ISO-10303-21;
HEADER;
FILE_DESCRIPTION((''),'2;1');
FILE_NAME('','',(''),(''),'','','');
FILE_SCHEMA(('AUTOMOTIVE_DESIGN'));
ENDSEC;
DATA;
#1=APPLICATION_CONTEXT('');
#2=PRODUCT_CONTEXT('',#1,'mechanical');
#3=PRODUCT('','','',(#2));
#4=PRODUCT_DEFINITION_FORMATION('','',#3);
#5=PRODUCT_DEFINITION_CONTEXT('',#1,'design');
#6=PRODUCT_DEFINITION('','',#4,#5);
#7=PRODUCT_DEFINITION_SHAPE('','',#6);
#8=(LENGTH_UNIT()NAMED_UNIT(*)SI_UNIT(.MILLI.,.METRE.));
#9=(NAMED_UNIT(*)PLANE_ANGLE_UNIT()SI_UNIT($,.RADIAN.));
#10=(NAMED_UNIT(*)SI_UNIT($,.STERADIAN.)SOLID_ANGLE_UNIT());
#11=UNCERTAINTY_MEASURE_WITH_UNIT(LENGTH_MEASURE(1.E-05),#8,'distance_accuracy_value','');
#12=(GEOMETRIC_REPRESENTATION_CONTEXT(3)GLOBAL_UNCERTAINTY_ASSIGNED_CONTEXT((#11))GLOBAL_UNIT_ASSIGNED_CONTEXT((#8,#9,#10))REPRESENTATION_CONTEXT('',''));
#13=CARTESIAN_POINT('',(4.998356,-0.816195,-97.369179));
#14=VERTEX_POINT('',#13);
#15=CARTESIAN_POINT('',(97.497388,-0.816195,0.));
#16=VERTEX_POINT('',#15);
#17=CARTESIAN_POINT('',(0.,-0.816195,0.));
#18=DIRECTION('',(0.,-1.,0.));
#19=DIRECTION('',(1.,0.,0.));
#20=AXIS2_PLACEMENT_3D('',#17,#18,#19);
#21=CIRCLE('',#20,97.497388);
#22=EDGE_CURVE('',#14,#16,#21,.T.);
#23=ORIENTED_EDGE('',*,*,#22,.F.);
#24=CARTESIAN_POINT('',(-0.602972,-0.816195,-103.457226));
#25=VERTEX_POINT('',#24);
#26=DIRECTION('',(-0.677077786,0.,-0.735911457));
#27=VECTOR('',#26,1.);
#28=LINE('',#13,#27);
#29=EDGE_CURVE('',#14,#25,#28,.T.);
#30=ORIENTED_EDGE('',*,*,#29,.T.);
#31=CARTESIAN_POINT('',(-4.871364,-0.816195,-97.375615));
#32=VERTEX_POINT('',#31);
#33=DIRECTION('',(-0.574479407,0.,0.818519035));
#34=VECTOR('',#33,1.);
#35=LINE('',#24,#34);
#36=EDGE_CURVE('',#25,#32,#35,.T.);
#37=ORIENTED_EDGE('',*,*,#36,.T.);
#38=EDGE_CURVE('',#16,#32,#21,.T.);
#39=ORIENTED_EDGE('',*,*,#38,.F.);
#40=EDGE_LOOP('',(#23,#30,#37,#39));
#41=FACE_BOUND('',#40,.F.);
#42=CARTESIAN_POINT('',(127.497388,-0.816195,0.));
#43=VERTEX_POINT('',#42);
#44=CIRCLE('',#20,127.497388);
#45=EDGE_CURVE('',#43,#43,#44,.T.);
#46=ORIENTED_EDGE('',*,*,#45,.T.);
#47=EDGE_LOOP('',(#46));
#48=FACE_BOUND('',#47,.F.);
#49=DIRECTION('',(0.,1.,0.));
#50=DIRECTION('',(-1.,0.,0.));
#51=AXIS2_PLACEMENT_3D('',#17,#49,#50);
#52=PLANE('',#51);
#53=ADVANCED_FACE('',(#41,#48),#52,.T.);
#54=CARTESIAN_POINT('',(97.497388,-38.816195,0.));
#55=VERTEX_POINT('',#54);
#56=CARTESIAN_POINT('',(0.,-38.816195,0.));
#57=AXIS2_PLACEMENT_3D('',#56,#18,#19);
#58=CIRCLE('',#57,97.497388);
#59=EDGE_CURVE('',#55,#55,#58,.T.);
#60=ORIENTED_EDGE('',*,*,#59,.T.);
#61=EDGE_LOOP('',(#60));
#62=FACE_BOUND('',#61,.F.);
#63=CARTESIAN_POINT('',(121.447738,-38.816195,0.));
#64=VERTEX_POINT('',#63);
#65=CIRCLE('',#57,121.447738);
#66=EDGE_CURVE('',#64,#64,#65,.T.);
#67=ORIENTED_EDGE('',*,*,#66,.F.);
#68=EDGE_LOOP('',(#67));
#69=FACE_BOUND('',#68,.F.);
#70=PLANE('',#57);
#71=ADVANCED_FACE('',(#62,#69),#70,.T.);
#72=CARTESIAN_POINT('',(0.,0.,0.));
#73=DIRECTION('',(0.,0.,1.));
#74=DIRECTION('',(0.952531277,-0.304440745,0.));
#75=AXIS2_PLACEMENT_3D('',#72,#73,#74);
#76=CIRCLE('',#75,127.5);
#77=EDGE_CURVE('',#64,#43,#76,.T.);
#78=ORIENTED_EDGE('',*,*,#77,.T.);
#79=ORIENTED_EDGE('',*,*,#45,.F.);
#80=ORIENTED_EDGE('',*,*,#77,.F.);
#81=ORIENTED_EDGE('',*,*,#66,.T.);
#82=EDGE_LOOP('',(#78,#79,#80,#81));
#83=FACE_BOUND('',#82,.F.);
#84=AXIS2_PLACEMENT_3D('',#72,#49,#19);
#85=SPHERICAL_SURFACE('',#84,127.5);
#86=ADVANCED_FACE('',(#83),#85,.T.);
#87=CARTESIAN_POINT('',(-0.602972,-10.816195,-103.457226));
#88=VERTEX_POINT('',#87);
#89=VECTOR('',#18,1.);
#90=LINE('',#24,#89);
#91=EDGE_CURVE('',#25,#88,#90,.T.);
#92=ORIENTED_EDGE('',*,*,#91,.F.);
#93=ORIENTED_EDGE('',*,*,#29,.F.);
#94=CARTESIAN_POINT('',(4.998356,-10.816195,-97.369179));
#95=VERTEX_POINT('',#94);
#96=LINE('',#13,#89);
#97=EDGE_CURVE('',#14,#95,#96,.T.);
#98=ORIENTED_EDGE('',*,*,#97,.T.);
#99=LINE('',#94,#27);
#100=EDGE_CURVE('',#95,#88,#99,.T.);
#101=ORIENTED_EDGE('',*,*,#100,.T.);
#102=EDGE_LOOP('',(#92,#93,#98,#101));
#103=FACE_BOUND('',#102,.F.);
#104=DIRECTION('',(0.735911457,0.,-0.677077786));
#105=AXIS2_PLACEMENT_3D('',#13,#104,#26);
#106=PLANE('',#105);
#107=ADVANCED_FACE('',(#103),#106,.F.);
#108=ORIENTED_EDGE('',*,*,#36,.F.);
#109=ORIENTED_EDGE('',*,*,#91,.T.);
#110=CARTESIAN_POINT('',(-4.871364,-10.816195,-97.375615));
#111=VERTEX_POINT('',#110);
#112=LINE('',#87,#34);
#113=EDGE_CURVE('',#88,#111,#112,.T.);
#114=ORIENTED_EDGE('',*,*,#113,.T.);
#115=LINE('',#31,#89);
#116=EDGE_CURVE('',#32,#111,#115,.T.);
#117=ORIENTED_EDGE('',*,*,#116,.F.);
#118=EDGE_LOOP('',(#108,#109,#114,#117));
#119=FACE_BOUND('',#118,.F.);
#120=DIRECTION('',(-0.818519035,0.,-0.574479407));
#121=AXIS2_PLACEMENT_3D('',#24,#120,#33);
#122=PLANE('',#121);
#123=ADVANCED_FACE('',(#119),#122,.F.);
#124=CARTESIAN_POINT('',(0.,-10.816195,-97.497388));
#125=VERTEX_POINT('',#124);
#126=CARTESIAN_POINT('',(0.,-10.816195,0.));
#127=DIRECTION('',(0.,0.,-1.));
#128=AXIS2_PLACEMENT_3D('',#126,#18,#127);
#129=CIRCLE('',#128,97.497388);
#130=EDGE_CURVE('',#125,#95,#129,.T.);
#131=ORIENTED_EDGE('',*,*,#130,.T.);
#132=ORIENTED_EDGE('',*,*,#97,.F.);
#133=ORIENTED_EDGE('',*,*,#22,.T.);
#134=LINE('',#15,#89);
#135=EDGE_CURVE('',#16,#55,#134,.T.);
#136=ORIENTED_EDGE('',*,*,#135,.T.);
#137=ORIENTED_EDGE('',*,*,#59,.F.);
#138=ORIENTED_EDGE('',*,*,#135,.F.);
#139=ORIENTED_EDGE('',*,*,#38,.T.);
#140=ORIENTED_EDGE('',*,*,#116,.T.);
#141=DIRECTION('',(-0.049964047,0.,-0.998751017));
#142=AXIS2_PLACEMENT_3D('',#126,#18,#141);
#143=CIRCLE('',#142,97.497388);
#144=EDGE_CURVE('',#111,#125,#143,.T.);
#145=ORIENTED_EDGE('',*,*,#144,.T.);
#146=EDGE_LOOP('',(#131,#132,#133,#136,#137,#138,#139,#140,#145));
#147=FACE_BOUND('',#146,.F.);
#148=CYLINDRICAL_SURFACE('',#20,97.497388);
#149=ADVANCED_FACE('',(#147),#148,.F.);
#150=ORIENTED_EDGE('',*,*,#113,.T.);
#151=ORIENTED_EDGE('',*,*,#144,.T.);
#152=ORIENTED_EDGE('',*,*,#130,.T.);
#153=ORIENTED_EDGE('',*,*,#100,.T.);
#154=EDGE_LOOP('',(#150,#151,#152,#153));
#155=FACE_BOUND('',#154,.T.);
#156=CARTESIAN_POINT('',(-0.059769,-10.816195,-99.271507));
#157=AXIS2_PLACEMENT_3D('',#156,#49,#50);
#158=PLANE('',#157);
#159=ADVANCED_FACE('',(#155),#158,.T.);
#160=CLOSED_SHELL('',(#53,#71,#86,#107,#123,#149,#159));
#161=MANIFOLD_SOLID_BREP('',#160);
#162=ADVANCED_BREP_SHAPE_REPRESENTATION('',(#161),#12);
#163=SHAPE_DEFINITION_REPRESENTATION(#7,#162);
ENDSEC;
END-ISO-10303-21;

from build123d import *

# Parameters (mm, degrees)
F3_DEPTH = 10


with BuildPart() as f1:
    # F0 (on Top) → F1 (revolve)
    with BuildSketch(Plane.XY):
        with BuildLine():
            Line((97.4973875252, -38.8161949813), (121.4477377606, -38.8161949813))
            ThreePointArc((121.4477377606, -38.8161949813), (120.5697284263, -19.6675259883), (117.0955747366, -0.8161949813))
            Line((117.0955747366, -0.8161949813), (97.4973875252, -0.8161949813))
            Line((97.4973875252, -0.8161949813), (97.4973875252, -38.8161949813))
        make_face()
        with BuildLine():
            ThreePointArc((117.0955747366, -0.8161949813), (120.5697284263, -19.6675259883), (121.4477377606, -38.8161949813))
            ThreePointArc((121.4477377606, -38.8161949813), (125.914331396, -20.045726455), (127.4973875252, -0.8161949813))
            Line((127.4973875252, -0.8161949813), (117.0955747366, -0.8161949813))
        make_face()
    revolve(axis=Axis((0, 9.7614582628, 0), (0, -1, 0)))

    # F2 (on face) → F3 (cut)
    with BuildSketch(Plane(origin=(0, -0.8161949813, 0), x_dir=(-1, 0, 0), z_dir=(0, 1, 0))):
        with BuildLine():
            Line((-4.9983559861, -97.3691789617), (0.6029718567, -103.4572258853))
            Line((0.6029718567, -103.4572258853), (4.8713640334, -97.375614949))
            ThreePointArc((4.8713640334, -97.375614949), (2.4364429045, -97.4669396268), (0, -97.4973875252))
            ThreePointArc((0, -97.4973875252), (-2.5, -97.465330114), (-4.9983559861, -97.3691789617))
        make_face()
    extrude(amount=-F3_DEPTH, mode=Mode.SUBTRACT)


solid = f1.part
